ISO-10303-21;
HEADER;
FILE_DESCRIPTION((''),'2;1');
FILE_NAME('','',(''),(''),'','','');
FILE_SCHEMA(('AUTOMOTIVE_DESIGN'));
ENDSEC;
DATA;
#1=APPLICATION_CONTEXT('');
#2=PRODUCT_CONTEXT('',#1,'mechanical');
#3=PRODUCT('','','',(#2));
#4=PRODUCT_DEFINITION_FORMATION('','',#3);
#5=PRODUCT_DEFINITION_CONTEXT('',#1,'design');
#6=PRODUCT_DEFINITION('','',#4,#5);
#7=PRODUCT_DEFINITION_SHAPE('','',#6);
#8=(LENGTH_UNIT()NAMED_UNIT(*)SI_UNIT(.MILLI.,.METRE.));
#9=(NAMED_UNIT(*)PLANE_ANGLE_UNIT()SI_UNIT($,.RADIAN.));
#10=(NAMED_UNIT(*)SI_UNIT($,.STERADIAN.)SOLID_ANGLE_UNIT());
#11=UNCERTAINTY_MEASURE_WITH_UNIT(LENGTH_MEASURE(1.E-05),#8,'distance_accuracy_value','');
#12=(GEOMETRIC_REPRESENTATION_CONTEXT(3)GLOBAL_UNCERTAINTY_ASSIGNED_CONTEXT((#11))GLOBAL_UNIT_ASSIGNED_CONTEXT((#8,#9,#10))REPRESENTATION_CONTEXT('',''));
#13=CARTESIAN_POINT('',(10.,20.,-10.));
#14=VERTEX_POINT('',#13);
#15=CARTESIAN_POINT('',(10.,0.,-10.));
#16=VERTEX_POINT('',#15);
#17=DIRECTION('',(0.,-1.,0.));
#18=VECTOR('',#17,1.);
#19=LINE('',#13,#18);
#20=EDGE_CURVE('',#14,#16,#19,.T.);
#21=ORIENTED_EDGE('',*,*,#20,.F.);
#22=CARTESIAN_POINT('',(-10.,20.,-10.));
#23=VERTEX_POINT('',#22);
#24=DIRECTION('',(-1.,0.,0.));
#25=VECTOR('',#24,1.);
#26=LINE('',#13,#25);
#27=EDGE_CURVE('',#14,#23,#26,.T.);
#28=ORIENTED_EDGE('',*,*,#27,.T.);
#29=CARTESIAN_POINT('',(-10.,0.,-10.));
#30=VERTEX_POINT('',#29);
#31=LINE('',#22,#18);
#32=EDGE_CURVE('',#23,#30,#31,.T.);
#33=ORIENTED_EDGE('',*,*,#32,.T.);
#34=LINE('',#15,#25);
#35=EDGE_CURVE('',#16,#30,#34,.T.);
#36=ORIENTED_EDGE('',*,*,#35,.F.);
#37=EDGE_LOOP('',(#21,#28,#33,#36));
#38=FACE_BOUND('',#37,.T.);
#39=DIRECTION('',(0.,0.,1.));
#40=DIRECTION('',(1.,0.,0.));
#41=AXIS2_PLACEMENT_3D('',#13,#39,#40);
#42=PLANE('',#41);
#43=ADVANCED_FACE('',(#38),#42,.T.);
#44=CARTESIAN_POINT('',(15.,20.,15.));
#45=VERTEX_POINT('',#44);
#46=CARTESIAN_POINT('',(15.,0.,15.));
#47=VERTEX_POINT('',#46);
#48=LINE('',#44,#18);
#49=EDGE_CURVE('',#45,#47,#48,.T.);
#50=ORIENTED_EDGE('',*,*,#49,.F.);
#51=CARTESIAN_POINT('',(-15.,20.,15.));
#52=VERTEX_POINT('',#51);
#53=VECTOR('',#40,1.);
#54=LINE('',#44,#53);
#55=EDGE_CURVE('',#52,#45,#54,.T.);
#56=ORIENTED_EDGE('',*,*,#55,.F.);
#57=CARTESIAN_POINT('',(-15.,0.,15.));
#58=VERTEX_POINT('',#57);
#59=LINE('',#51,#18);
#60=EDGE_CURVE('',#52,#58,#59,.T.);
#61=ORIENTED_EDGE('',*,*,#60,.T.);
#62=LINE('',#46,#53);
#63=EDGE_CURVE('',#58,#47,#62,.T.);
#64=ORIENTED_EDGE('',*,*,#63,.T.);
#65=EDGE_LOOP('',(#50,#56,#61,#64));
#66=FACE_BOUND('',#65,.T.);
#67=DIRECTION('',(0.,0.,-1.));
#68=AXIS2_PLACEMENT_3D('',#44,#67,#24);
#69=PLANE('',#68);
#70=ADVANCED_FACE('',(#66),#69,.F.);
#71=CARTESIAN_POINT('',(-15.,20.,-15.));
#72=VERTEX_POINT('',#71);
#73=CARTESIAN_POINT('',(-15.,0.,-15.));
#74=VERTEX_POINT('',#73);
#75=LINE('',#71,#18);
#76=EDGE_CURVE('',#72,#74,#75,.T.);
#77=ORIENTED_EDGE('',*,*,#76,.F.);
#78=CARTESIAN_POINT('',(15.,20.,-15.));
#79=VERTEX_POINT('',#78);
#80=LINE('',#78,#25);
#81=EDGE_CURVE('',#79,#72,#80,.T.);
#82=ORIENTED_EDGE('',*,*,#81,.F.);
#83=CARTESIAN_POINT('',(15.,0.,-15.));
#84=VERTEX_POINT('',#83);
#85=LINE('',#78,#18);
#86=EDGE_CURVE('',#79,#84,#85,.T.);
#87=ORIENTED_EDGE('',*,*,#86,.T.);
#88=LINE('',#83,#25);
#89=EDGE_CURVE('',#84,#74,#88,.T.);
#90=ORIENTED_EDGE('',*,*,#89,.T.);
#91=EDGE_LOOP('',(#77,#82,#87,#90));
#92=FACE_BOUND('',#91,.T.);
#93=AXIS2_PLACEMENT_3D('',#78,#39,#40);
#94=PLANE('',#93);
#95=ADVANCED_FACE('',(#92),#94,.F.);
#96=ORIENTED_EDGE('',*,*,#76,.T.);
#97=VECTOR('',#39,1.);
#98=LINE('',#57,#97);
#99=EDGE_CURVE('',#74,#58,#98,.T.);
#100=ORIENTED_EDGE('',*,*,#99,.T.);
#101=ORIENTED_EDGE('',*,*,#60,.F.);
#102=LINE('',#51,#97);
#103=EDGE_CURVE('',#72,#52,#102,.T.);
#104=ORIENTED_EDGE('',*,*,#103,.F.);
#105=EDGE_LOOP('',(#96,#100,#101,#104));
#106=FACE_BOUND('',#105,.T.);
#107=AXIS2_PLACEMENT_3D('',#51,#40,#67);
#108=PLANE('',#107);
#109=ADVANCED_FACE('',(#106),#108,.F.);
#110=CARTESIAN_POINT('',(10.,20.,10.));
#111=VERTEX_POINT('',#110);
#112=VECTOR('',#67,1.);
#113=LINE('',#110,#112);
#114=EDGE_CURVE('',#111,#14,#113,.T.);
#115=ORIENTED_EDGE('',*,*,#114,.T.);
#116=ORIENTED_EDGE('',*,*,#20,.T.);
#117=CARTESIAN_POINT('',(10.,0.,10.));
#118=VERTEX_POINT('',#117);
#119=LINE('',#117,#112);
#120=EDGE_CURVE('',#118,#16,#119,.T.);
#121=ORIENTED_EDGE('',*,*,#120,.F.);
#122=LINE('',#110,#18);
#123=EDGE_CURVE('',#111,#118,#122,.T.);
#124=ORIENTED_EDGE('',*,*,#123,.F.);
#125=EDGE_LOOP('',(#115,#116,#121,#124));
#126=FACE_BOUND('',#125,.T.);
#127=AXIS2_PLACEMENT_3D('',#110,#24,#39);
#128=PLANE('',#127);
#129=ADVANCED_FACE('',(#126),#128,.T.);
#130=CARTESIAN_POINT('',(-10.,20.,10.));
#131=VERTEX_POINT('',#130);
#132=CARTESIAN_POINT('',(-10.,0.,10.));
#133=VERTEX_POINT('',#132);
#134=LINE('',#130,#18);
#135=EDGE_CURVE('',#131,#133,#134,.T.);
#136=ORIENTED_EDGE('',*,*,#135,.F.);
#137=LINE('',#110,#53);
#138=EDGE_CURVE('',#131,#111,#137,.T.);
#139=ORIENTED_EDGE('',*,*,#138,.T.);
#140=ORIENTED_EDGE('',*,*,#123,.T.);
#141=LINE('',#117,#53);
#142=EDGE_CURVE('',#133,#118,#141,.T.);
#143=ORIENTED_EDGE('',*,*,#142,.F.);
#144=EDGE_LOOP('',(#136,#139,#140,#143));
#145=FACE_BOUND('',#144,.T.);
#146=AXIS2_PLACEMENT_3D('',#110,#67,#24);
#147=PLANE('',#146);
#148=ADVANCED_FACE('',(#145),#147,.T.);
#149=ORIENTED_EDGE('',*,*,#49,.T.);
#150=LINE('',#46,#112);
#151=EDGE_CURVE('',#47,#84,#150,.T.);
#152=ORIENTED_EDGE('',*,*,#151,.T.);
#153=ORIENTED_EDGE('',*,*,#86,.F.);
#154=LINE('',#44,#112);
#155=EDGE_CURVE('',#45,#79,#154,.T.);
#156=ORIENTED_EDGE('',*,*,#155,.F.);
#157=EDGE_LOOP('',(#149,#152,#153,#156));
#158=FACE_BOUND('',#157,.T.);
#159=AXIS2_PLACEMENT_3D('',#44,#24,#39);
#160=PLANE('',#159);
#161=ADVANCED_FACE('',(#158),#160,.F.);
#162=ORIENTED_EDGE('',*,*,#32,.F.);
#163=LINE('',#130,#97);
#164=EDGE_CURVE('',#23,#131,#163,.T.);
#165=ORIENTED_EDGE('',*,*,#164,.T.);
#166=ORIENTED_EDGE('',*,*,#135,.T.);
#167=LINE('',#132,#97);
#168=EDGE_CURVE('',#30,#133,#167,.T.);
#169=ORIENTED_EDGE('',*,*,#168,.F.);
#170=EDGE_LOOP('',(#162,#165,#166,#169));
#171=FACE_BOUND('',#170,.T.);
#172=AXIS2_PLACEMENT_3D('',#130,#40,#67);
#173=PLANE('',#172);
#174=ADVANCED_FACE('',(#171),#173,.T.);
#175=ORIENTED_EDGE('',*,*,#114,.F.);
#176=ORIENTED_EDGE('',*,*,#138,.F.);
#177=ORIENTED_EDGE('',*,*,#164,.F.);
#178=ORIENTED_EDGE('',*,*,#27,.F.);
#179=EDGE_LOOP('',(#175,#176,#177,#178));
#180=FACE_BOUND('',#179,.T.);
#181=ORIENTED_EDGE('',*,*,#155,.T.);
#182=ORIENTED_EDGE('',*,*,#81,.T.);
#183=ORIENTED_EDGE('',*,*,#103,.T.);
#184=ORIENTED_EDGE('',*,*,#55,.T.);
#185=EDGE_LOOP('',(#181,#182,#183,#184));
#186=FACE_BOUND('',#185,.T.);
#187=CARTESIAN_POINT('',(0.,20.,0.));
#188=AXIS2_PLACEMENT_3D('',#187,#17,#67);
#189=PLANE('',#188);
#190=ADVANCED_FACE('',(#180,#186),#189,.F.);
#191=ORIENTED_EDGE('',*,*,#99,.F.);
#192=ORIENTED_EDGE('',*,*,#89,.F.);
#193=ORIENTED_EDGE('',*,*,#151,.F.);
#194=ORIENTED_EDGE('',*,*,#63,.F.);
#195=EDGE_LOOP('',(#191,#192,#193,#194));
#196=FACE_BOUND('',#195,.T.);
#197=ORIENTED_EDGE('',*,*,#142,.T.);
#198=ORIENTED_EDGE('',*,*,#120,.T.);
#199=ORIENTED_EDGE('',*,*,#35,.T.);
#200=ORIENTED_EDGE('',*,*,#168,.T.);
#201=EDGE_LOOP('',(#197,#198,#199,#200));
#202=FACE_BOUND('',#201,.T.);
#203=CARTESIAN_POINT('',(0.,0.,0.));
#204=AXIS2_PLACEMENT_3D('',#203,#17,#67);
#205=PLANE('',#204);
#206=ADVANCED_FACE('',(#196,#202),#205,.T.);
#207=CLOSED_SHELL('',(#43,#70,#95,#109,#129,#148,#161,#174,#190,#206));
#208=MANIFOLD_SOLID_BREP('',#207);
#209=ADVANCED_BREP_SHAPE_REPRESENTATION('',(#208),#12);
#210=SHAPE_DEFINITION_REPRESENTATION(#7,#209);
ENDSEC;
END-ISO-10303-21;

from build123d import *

# Parameters (mm, degrees)
SKETCH1_W           = 30
SKETCH1_H           = 30
SKETCH1_W_2         = 20
SKETCH1_H_2         = 20
BOSS_EXTRUDE1_DEPTH = 20


with BuildPart() as part:
    # Sketch1 → Boss-Extrude1 (new body)
    with BuildSketch(Plane(origin=(0, 0, 0), x_dir=(1, 0, 0), z_dir=(0, 1, 0))):
        Rectangle(SKETCH1_W, SKETCH1_H)
        Rectangle(SKETCH1_W_2, SKETCH1_H_2, mode=Mode.SUBTRACT)
    extrude(amount=BOSS_EXTRUDE1_DEPTH)


solid = part.part
